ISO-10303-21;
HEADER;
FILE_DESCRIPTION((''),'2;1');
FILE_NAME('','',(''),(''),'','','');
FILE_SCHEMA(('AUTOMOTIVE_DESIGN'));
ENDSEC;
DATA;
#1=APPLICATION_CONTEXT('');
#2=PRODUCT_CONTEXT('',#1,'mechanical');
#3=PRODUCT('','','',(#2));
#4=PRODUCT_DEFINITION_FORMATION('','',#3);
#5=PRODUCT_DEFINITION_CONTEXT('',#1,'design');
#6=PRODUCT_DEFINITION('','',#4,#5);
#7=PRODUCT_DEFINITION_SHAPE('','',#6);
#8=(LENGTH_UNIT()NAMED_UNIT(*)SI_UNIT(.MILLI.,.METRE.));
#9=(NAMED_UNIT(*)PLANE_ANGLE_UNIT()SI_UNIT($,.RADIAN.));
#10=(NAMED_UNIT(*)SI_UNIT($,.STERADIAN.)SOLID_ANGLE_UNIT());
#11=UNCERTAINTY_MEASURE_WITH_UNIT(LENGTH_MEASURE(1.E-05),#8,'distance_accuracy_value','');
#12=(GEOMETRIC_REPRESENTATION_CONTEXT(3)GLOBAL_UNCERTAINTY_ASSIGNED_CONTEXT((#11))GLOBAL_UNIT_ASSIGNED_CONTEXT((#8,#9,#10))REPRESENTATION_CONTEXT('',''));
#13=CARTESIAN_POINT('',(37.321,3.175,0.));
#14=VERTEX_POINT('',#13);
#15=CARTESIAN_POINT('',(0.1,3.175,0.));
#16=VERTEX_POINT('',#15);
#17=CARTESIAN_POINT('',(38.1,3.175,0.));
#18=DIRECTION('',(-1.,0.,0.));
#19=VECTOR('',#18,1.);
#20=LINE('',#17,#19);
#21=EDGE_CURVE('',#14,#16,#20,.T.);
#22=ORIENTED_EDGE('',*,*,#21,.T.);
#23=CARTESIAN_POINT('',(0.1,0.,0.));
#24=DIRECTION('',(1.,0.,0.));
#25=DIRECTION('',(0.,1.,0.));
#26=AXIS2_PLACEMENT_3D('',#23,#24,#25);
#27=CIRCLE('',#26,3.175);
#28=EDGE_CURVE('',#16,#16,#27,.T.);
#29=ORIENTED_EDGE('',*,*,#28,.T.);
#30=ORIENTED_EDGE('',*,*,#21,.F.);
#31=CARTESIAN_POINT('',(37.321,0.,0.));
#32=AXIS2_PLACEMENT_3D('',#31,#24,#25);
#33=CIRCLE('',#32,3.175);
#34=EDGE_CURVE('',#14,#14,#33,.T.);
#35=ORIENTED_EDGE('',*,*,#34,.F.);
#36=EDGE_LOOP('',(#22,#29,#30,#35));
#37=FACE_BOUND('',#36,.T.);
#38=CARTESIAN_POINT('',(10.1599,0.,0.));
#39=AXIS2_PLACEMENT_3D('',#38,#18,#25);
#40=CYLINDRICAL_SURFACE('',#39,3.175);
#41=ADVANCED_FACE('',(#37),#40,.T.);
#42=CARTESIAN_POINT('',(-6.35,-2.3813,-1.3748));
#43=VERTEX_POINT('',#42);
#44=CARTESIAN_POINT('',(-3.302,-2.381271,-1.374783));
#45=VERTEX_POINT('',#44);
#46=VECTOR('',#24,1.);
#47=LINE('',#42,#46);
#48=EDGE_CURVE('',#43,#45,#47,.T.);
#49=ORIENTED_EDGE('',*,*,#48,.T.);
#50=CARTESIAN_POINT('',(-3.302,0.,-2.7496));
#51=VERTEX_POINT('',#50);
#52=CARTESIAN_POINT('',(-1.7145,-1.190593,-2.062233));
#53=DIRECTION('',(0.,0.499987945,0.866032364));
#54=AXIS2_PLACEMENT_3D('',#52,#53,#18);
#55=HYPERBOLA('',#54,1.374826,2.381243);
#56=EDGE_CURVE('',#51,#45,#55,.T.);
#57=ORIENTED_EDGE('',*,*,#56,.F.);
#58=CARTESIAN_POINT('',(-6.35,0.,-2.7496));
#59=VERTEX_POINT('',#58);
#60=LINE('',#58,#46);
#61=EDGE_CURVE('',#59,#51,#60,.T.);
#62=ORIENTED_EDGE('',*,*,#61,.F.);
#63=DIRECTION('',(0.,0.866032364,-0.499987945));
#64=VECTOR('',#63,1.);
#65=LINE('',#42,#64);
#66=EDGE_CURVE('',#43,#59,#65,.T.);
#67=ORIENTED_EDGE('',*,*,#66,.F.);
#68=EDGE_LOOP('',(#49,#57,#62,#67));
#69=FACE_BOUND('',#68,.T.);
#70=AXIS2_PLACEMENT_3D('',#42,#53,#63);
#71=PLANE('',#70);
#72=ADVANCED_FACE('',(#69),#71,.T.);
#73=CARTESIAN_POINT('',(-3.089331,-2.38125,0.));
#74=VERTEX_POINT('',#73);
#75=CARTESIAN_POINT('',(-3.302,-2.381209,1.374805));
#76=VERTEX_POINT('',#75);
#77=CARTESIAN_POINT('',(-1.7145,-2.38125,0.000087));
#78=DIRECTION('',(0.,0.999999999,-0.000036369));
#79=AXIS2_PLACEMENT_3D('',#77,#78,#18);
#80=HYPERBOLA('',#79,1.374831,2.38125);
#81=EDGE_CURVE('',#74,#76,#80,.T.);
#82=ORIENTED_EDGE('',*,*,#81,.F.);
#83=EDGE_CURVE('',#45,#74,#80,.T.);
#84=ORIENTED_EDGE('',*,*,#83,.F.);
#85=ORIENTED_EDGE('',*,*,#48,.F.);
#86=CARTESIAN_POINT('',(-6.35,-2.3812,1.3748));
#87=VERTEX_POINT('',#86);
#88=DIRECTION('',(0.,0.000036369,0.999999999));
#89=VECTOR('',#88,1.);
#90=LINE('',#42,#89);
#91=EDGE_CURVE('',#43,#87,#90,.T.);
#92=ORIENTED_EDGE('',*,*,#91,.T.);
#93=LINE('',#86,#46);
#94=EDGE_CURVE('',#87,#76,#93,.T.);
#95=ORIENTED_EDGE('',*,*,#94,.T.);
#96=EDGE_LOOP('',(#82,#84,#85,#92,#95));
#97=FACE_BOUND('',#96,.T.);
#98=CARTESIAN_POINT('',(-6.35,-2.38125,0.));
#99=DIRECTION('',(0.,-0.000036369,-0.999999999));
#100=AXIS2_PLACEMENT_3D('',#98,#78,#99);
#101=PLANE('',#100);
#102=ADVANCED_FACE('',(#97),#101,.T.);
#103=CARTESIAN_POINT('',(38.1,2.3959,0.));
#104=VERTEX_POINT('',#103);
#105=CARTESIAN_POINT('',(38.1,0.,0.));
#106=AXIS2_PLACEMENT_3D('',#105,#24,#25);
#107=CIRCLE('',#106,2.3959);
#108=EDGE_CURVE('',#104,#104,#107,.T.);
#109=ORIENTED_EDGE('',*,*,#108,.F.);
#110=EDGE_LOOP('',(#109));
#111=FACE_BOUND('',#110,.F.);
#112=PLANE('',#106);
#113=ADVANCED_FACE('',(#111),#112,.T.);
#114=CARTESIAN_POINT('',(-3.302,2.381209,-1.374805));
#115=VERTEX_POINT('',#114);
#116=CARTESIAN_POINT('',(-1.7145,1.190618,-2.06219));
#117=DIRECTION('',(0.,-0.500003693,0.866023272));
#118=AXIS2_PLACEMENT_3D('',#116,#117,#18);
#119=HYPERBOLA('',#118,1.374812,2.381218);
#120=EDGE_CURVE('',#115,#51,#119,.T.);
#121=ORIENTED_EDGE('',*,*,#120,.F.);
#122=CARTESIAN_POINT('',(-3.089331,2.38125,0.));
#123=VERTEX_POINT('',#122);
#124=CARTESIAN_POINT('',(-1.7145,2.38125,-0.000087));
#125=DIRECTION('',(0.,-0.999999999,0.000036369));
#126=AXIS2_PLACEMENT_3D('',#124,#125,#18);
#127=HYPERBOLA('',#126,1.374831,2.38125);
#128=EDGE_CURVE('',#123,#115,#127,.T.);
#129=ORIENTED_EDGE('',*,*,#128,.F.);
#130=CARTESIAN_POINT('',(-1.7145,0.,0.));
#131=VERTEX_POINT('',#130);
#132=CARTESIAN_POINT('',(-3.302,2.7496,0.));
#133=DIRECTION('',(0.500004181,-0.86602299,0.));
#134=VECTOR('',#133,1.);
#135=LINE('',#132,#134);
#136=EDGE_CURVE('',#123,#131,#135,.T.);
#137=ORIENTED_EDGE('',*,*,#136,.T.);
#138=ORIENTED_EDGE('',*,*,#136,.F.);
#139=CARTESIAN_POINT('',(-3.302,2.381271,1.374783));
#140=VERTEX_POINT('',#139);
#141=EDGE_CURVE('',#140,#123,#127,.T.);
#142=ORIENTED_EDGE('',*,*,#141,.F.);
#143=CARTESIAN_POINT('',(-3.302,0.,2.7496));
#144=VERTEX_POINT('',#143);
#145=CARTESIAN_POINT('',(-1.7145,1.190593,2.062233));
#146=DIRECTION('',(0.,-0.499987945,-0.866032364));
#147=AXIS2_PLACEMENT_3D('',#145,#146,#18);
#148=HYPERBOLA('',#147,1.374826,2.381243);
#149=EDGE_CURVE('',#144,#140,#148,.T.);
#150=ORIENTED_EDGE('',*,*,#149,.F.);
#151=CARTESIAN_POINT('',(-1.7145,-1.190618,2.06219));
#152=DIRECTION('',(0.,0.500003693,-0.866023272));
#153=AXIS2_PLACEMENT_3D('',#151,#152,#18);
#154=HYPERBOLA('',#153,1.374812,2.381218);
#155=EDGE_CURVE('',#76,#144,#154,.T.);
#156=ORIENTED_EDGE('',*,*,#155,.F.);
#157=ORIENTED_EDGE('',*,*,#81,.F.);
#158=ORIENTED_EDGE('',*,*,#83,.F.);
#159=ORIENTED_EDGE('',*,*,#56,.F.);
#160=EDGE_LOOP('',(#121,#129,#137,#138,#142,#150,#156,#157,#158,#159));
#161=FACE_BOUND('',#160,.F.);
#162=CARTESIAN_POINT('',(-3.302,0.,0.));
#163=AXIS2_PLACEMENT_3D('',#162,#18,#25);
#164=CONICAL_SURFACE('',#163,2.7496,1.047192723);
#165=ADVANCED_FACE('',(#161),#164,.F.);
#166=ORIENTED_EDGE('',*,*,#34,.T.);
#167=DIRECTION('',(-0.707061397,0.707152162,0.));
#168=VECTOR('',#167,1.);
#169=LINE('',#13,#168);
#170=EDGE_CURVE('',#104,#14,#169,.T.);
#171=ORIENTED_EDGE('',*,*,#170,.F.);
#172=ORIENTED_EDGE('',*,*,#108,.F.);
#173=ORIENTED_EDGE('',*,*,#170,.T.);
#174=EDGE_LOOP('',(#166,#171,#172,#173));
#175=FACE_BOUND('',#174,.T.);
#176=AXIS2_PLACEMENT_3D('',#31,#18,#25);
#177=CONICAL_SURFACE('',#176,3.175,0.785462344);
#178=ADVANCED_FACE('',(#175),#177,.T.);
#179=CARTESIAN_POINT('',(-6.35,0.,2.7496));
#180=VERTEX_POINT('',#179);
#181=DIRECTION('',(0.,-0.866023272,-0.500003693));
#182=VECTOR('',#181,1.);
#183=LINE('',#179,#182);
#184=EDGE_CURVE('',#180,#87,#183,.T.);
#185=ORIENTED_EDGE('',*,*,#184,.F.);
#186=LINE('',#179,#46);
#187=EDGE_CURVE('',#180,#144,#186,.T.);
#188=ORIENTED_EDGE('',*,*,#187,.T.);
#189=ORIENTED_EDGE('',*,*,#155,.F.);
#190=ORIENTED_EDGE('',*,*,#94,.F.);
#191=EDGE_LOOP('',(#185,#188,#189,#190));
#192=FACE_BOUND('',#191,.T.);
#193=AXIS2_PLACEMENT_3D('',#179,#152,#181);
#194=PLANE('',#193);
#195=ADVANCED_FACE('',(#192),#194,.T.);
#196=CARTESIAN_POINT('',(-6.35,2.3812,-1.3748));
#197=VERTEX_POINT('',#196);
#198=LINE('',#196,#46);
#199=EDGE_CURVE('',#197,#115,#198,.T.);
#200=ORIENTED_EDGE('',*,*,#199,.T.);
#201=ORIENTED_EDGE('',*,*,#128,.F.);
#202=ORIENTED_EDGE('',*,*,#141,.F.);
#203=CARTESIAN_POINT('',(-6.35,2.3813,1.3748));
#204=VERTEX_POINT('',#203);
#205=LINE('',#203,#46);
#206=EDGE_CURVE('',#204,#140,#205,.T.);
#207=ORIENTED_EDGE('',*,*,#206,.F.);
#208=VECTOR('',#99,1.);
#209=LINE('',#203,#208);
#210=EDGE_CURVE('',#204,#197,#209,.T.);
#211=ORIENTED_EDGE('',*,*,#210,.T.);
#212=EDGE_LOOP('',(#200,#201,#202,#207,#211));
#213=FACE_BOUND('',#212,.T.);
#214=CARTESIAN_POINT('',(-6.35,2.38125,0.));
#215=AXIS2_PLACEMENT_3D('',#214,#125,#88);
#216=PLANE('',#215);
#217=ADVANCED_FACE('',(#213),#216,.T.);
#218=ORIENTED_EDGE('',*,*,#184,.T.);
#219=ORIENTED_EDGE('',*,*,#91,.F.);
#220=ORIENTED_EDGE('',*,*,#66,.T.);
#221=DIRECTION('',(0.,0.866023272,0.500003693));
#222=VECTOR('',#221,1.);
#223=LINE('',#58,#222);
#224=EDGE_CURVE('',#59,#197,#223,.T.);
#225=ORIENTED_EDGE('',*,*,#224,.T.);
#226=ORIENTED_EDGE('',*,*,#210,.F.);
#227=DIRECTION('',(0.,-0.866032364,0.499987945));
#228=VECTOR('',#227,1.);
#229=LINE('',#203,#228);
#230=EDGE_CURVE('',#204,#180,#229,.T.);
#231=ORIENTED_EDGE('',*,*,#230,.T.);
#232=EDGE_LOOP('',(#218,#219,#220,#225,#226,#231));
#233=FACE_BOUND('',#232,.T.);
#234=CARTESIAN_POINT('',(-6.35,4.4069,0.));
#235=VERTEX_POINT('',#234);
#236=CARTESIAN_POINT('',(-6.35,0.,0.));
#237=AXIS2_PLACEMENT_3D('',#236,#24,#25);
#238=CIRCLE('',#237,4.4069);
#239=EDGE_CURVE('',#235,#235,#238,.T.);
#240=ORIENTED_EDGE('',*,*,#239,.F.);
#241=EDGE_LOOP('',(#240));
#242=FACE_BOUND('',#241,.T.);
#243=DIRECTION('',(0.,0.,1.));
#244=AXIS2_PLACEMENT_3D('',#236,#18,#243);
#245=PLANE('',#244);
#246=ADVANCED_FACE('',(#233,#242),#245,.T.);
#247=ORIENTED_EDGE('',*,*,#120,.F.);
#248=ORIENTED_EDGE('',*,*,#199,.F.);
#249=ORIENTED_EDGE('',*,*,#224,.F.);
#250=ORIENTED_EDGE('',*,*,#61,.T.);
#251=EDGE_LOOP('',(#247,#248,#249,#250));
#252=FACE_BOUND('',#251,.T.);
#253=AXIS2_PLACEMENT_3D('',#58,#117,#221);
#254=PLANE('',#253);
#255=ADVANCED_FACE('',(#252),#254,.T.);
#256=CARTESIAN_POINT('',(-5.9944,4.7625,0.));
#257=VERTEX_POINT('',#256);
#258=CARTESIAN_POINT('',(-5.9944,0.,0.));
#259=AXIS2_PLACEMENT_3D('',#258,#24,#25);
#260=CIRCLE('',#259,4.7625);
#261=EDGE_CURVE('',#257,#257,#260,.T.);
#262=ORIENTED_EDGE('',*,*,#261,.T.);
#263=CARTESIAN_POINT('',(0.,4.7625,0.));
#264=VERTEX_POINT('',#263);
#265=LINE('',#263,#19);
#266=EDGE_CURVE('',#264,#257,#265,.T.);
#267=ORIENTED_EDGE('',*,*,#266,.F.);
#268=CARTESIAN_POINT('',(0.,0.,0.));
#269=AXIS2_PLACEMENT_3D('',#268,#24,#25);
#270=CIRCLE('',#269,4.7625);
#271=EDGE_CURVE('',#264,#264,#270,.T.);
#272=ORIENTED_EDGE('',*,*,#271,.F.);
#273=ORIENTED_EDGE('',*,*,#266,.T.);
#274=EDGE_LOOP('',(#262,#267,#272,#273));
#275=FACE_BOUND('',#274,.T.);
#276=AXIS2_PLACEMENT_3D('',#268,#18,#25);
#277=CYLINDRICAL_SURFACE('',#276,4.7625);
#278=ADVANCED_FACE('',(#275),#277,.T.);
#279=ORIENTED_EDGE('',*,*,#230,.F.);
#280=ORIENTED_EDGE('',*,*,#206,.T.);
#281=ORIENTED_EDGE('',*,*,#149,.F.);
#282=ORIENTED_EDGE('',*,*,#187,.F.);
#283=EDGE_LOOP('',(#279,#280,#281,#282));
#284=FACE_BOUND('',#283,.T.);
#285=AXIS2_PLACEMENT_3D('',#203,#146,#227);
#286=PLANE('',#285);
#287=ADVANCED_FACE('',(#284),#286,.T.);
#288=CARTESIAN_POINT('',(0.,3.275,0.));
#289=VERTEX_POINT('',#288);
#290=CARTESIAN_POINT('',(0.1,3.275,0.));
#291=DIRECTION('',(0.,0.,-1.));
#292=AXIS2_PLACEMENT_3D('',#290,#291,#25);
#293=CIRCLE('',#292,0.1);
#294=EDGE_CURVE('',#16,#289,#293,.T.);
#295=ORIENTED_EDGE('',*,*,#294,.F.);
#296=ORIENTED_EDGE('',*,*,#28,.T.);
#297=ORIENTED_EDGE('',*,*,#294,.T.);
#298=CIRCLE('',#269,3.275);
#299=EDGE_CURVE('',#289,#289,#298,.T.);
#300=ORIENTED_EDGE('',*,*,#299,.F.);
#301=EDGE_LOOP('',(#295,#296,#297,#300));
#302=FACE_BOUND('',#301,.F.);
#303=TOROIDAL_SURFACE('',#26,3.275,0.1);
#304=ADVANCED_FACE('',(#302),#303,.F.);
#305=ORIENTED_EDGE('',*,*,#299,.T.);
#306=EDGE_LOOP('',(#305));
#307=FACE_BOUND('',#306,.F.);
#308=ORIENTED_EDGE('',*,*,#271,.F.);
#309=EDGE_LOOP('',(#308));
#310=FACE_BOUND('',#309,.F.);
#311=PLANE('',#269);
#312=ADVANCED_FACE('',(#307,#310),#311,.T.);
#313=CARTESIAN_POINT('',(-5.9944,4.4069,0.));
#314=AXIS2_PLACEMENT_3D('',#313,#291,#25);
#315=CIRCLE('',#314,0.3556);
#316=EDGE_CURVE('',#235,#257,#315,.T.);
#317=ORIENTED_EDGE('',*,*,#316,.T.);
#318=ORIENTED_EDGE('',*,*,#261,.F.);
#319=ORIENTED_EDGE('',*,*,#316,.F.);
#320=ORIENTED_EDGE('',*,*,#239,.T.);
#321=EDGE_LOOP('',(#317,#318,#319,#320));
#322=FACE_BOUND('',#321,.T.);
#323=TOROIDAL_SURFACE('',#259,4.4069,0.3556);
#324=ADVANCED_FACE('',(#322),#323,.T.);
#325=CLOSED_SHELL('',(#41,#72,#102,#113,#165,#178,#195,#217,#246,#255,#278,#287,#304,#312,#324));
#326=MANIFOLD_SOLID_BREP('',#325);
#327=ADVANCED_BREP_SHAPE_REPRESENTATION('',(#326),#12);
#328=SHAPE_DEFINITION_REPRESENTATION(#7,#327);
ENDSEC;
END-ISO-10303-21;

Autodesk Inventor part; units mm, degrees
ref_plane "YZ Plane" through (0, 0, 0) normal (1, 0, 0) x (0, 1, 0)
ref_plane "XZ Plane" through (0, 0, 0) normal (0, 1, 0) x (-1, 0, 0)
sketch "Sketch1" plane through (0, 0, 0) normal (0, 0, 1) x (1, 0, 0)
  line L0 (-1.7145, 0) -> (38.1, 0)
  line L1 (38.1, 0) -> (38.1, 3.175)
  line L2 (38.1, 3.175) -> (12.7, 3.175)
  line L3 (12.7, 3.175) -> (10.1599, 3.175)
  line L4 (10.1599, 3.175) -> (0, 3.175)
  line L5 (0, 3.175) -> (0, 4.7625)
  line L6 (0, 4.7625) -> (-6.35, 4.7625)
  line L7 (-6.35, 4.7625) -> (-6.35, 2.7496)
  line L8 (-6.35, 2.7496) -> (-3.302, 2.7496)
  line L9 (-3.302, 2.7496) -> (-1.7145, 0)
  line L10 (-15.24, 0) -> (46.99, 0) projected
  line L11 (0, -0.9525) -> (0, 5.715) projected
  line L12 (12.7, 3.175) -> (0, 3.175) construction
  dimension "d1" = 25.4
  dimension "d2" = 2.5401
  dimension "d3" = 6.35
  dimension "d4" = 3.048
  dimension "d5" = 60
  dimension "d6" = 6.35
  dimension "d7" = 6.35
  dimension "d8" = 5.4993
  dimension "d9" = 9.525
  dimension "d26" = 38.1
revolve "Body" add sketch "Sketch1" angle 360 about axis through (-1.7145, 0, 0) along (1, 0, 0)
sketch "Sketch2" plane through (-6.35, 0, 0) normal (-1, 0, 0) x (0, 0, 1)
  circle A0 centre (0, 0) radius 2.7496 projected
  line L0 (0, -6.6675) -> (0, 6.6675) projected
  line L1 (-6.6675, 0) -> (6.6675, 0) projected
  line L2 (2.7496, 0) -> (1.3748, -2.3812)
  line L3 (1.3748, -2.3812) -> (-1.3748, -2.3813)
  line L4 (-1.3748, -2.3813) -> (-2.7496, 0)
  line L5 (-2.7496, 0) -> (-1.3748, 2.3812)
  line L6 (-1.3748, 2.3812) -> (1.3748, 2.3813)
  line L7 (1.3748, 2.3813) -> (2.7496, 0)
extrude "Slot" add sketch "Sketch2" against normal up to next contours L7 A0 | A0 L2 | L6 L0 A0 | A0 L0 L3 | L0 L6 A0 | A0 L3 L0 | L4 A0 | A0 L5
fillet "Fillet1" radius 0.3556 1 edges at (-6.35, -4.7625, 0)
thread "Thread" size "1/4-20 UNC" class "2A" standard "ANSI Unified Screw Threads" length 25.4
chamfer "Chamfer1" distance 0.7791 distance2 0.779 1 edges at (38.1, -3.175, 0) measured on face at (38.1, -0.6107, -1.4381)
ref_plane "Work Plane1" through (29, 0, 0) normal (0, -1, 0) x (1, 0, 0)
fillet "Fillet2" radius 0.1 1 edges at (0, -3.175, 0)
equation "\"d30\" = R"
equation "\"d17\" = RR"
equation "\"d13\" = GEL"
equation "\"d15\" = -0.5 * SPD + 0.5 * GD"
equation "\"d16\" = GUL"
equation "\"d1\" = GEL"
equation "\"d3\" = KOH"
equation "\"d4\" = INTI"
equation "\"d6\" = GD"
equation "\"d7\" = BDM"
equation "\"d8\" = 1.1547 * SW"
equation "\"d9\" = KOD"
equation "\"d26\" = NLG"
equation "\"GD\" = NND"
equation "\"NLG\" = 38.1"
equation "\"GEL\" = 25.4"
equation "\"KOD\" = 9.525"
equation "\"KOH\" = NND"
equation "\"INTI\" = 3.048"
equation "\"GAL\" = 2.54"
equation "\"GUL\" = 0.77902"
equation "\"BDM\" = NND"
equation "\"SW\" = 4.7625"
equation "\"RR\" = 0.3556"
equation "\"SPD\" = GD1"
equation "\"R\" = 0.1"
equation "\"PHH\" = 0.1 * NND"
equation "\"THREADDIA\" = 6.35"
equation "\"FAWI\" = 45deg"
equation "\"NND\" = 6.35"
equation "\"E0\" = 1.155 * SW"
equation "\"FAWI1\" = 30deg"
equation "\"TOA\" = 30deg"
equation "\"GD1\" = 4.79189"
properties part number "Unbrako - 1/4 x 1 1/2" material "Steel, Mild"
